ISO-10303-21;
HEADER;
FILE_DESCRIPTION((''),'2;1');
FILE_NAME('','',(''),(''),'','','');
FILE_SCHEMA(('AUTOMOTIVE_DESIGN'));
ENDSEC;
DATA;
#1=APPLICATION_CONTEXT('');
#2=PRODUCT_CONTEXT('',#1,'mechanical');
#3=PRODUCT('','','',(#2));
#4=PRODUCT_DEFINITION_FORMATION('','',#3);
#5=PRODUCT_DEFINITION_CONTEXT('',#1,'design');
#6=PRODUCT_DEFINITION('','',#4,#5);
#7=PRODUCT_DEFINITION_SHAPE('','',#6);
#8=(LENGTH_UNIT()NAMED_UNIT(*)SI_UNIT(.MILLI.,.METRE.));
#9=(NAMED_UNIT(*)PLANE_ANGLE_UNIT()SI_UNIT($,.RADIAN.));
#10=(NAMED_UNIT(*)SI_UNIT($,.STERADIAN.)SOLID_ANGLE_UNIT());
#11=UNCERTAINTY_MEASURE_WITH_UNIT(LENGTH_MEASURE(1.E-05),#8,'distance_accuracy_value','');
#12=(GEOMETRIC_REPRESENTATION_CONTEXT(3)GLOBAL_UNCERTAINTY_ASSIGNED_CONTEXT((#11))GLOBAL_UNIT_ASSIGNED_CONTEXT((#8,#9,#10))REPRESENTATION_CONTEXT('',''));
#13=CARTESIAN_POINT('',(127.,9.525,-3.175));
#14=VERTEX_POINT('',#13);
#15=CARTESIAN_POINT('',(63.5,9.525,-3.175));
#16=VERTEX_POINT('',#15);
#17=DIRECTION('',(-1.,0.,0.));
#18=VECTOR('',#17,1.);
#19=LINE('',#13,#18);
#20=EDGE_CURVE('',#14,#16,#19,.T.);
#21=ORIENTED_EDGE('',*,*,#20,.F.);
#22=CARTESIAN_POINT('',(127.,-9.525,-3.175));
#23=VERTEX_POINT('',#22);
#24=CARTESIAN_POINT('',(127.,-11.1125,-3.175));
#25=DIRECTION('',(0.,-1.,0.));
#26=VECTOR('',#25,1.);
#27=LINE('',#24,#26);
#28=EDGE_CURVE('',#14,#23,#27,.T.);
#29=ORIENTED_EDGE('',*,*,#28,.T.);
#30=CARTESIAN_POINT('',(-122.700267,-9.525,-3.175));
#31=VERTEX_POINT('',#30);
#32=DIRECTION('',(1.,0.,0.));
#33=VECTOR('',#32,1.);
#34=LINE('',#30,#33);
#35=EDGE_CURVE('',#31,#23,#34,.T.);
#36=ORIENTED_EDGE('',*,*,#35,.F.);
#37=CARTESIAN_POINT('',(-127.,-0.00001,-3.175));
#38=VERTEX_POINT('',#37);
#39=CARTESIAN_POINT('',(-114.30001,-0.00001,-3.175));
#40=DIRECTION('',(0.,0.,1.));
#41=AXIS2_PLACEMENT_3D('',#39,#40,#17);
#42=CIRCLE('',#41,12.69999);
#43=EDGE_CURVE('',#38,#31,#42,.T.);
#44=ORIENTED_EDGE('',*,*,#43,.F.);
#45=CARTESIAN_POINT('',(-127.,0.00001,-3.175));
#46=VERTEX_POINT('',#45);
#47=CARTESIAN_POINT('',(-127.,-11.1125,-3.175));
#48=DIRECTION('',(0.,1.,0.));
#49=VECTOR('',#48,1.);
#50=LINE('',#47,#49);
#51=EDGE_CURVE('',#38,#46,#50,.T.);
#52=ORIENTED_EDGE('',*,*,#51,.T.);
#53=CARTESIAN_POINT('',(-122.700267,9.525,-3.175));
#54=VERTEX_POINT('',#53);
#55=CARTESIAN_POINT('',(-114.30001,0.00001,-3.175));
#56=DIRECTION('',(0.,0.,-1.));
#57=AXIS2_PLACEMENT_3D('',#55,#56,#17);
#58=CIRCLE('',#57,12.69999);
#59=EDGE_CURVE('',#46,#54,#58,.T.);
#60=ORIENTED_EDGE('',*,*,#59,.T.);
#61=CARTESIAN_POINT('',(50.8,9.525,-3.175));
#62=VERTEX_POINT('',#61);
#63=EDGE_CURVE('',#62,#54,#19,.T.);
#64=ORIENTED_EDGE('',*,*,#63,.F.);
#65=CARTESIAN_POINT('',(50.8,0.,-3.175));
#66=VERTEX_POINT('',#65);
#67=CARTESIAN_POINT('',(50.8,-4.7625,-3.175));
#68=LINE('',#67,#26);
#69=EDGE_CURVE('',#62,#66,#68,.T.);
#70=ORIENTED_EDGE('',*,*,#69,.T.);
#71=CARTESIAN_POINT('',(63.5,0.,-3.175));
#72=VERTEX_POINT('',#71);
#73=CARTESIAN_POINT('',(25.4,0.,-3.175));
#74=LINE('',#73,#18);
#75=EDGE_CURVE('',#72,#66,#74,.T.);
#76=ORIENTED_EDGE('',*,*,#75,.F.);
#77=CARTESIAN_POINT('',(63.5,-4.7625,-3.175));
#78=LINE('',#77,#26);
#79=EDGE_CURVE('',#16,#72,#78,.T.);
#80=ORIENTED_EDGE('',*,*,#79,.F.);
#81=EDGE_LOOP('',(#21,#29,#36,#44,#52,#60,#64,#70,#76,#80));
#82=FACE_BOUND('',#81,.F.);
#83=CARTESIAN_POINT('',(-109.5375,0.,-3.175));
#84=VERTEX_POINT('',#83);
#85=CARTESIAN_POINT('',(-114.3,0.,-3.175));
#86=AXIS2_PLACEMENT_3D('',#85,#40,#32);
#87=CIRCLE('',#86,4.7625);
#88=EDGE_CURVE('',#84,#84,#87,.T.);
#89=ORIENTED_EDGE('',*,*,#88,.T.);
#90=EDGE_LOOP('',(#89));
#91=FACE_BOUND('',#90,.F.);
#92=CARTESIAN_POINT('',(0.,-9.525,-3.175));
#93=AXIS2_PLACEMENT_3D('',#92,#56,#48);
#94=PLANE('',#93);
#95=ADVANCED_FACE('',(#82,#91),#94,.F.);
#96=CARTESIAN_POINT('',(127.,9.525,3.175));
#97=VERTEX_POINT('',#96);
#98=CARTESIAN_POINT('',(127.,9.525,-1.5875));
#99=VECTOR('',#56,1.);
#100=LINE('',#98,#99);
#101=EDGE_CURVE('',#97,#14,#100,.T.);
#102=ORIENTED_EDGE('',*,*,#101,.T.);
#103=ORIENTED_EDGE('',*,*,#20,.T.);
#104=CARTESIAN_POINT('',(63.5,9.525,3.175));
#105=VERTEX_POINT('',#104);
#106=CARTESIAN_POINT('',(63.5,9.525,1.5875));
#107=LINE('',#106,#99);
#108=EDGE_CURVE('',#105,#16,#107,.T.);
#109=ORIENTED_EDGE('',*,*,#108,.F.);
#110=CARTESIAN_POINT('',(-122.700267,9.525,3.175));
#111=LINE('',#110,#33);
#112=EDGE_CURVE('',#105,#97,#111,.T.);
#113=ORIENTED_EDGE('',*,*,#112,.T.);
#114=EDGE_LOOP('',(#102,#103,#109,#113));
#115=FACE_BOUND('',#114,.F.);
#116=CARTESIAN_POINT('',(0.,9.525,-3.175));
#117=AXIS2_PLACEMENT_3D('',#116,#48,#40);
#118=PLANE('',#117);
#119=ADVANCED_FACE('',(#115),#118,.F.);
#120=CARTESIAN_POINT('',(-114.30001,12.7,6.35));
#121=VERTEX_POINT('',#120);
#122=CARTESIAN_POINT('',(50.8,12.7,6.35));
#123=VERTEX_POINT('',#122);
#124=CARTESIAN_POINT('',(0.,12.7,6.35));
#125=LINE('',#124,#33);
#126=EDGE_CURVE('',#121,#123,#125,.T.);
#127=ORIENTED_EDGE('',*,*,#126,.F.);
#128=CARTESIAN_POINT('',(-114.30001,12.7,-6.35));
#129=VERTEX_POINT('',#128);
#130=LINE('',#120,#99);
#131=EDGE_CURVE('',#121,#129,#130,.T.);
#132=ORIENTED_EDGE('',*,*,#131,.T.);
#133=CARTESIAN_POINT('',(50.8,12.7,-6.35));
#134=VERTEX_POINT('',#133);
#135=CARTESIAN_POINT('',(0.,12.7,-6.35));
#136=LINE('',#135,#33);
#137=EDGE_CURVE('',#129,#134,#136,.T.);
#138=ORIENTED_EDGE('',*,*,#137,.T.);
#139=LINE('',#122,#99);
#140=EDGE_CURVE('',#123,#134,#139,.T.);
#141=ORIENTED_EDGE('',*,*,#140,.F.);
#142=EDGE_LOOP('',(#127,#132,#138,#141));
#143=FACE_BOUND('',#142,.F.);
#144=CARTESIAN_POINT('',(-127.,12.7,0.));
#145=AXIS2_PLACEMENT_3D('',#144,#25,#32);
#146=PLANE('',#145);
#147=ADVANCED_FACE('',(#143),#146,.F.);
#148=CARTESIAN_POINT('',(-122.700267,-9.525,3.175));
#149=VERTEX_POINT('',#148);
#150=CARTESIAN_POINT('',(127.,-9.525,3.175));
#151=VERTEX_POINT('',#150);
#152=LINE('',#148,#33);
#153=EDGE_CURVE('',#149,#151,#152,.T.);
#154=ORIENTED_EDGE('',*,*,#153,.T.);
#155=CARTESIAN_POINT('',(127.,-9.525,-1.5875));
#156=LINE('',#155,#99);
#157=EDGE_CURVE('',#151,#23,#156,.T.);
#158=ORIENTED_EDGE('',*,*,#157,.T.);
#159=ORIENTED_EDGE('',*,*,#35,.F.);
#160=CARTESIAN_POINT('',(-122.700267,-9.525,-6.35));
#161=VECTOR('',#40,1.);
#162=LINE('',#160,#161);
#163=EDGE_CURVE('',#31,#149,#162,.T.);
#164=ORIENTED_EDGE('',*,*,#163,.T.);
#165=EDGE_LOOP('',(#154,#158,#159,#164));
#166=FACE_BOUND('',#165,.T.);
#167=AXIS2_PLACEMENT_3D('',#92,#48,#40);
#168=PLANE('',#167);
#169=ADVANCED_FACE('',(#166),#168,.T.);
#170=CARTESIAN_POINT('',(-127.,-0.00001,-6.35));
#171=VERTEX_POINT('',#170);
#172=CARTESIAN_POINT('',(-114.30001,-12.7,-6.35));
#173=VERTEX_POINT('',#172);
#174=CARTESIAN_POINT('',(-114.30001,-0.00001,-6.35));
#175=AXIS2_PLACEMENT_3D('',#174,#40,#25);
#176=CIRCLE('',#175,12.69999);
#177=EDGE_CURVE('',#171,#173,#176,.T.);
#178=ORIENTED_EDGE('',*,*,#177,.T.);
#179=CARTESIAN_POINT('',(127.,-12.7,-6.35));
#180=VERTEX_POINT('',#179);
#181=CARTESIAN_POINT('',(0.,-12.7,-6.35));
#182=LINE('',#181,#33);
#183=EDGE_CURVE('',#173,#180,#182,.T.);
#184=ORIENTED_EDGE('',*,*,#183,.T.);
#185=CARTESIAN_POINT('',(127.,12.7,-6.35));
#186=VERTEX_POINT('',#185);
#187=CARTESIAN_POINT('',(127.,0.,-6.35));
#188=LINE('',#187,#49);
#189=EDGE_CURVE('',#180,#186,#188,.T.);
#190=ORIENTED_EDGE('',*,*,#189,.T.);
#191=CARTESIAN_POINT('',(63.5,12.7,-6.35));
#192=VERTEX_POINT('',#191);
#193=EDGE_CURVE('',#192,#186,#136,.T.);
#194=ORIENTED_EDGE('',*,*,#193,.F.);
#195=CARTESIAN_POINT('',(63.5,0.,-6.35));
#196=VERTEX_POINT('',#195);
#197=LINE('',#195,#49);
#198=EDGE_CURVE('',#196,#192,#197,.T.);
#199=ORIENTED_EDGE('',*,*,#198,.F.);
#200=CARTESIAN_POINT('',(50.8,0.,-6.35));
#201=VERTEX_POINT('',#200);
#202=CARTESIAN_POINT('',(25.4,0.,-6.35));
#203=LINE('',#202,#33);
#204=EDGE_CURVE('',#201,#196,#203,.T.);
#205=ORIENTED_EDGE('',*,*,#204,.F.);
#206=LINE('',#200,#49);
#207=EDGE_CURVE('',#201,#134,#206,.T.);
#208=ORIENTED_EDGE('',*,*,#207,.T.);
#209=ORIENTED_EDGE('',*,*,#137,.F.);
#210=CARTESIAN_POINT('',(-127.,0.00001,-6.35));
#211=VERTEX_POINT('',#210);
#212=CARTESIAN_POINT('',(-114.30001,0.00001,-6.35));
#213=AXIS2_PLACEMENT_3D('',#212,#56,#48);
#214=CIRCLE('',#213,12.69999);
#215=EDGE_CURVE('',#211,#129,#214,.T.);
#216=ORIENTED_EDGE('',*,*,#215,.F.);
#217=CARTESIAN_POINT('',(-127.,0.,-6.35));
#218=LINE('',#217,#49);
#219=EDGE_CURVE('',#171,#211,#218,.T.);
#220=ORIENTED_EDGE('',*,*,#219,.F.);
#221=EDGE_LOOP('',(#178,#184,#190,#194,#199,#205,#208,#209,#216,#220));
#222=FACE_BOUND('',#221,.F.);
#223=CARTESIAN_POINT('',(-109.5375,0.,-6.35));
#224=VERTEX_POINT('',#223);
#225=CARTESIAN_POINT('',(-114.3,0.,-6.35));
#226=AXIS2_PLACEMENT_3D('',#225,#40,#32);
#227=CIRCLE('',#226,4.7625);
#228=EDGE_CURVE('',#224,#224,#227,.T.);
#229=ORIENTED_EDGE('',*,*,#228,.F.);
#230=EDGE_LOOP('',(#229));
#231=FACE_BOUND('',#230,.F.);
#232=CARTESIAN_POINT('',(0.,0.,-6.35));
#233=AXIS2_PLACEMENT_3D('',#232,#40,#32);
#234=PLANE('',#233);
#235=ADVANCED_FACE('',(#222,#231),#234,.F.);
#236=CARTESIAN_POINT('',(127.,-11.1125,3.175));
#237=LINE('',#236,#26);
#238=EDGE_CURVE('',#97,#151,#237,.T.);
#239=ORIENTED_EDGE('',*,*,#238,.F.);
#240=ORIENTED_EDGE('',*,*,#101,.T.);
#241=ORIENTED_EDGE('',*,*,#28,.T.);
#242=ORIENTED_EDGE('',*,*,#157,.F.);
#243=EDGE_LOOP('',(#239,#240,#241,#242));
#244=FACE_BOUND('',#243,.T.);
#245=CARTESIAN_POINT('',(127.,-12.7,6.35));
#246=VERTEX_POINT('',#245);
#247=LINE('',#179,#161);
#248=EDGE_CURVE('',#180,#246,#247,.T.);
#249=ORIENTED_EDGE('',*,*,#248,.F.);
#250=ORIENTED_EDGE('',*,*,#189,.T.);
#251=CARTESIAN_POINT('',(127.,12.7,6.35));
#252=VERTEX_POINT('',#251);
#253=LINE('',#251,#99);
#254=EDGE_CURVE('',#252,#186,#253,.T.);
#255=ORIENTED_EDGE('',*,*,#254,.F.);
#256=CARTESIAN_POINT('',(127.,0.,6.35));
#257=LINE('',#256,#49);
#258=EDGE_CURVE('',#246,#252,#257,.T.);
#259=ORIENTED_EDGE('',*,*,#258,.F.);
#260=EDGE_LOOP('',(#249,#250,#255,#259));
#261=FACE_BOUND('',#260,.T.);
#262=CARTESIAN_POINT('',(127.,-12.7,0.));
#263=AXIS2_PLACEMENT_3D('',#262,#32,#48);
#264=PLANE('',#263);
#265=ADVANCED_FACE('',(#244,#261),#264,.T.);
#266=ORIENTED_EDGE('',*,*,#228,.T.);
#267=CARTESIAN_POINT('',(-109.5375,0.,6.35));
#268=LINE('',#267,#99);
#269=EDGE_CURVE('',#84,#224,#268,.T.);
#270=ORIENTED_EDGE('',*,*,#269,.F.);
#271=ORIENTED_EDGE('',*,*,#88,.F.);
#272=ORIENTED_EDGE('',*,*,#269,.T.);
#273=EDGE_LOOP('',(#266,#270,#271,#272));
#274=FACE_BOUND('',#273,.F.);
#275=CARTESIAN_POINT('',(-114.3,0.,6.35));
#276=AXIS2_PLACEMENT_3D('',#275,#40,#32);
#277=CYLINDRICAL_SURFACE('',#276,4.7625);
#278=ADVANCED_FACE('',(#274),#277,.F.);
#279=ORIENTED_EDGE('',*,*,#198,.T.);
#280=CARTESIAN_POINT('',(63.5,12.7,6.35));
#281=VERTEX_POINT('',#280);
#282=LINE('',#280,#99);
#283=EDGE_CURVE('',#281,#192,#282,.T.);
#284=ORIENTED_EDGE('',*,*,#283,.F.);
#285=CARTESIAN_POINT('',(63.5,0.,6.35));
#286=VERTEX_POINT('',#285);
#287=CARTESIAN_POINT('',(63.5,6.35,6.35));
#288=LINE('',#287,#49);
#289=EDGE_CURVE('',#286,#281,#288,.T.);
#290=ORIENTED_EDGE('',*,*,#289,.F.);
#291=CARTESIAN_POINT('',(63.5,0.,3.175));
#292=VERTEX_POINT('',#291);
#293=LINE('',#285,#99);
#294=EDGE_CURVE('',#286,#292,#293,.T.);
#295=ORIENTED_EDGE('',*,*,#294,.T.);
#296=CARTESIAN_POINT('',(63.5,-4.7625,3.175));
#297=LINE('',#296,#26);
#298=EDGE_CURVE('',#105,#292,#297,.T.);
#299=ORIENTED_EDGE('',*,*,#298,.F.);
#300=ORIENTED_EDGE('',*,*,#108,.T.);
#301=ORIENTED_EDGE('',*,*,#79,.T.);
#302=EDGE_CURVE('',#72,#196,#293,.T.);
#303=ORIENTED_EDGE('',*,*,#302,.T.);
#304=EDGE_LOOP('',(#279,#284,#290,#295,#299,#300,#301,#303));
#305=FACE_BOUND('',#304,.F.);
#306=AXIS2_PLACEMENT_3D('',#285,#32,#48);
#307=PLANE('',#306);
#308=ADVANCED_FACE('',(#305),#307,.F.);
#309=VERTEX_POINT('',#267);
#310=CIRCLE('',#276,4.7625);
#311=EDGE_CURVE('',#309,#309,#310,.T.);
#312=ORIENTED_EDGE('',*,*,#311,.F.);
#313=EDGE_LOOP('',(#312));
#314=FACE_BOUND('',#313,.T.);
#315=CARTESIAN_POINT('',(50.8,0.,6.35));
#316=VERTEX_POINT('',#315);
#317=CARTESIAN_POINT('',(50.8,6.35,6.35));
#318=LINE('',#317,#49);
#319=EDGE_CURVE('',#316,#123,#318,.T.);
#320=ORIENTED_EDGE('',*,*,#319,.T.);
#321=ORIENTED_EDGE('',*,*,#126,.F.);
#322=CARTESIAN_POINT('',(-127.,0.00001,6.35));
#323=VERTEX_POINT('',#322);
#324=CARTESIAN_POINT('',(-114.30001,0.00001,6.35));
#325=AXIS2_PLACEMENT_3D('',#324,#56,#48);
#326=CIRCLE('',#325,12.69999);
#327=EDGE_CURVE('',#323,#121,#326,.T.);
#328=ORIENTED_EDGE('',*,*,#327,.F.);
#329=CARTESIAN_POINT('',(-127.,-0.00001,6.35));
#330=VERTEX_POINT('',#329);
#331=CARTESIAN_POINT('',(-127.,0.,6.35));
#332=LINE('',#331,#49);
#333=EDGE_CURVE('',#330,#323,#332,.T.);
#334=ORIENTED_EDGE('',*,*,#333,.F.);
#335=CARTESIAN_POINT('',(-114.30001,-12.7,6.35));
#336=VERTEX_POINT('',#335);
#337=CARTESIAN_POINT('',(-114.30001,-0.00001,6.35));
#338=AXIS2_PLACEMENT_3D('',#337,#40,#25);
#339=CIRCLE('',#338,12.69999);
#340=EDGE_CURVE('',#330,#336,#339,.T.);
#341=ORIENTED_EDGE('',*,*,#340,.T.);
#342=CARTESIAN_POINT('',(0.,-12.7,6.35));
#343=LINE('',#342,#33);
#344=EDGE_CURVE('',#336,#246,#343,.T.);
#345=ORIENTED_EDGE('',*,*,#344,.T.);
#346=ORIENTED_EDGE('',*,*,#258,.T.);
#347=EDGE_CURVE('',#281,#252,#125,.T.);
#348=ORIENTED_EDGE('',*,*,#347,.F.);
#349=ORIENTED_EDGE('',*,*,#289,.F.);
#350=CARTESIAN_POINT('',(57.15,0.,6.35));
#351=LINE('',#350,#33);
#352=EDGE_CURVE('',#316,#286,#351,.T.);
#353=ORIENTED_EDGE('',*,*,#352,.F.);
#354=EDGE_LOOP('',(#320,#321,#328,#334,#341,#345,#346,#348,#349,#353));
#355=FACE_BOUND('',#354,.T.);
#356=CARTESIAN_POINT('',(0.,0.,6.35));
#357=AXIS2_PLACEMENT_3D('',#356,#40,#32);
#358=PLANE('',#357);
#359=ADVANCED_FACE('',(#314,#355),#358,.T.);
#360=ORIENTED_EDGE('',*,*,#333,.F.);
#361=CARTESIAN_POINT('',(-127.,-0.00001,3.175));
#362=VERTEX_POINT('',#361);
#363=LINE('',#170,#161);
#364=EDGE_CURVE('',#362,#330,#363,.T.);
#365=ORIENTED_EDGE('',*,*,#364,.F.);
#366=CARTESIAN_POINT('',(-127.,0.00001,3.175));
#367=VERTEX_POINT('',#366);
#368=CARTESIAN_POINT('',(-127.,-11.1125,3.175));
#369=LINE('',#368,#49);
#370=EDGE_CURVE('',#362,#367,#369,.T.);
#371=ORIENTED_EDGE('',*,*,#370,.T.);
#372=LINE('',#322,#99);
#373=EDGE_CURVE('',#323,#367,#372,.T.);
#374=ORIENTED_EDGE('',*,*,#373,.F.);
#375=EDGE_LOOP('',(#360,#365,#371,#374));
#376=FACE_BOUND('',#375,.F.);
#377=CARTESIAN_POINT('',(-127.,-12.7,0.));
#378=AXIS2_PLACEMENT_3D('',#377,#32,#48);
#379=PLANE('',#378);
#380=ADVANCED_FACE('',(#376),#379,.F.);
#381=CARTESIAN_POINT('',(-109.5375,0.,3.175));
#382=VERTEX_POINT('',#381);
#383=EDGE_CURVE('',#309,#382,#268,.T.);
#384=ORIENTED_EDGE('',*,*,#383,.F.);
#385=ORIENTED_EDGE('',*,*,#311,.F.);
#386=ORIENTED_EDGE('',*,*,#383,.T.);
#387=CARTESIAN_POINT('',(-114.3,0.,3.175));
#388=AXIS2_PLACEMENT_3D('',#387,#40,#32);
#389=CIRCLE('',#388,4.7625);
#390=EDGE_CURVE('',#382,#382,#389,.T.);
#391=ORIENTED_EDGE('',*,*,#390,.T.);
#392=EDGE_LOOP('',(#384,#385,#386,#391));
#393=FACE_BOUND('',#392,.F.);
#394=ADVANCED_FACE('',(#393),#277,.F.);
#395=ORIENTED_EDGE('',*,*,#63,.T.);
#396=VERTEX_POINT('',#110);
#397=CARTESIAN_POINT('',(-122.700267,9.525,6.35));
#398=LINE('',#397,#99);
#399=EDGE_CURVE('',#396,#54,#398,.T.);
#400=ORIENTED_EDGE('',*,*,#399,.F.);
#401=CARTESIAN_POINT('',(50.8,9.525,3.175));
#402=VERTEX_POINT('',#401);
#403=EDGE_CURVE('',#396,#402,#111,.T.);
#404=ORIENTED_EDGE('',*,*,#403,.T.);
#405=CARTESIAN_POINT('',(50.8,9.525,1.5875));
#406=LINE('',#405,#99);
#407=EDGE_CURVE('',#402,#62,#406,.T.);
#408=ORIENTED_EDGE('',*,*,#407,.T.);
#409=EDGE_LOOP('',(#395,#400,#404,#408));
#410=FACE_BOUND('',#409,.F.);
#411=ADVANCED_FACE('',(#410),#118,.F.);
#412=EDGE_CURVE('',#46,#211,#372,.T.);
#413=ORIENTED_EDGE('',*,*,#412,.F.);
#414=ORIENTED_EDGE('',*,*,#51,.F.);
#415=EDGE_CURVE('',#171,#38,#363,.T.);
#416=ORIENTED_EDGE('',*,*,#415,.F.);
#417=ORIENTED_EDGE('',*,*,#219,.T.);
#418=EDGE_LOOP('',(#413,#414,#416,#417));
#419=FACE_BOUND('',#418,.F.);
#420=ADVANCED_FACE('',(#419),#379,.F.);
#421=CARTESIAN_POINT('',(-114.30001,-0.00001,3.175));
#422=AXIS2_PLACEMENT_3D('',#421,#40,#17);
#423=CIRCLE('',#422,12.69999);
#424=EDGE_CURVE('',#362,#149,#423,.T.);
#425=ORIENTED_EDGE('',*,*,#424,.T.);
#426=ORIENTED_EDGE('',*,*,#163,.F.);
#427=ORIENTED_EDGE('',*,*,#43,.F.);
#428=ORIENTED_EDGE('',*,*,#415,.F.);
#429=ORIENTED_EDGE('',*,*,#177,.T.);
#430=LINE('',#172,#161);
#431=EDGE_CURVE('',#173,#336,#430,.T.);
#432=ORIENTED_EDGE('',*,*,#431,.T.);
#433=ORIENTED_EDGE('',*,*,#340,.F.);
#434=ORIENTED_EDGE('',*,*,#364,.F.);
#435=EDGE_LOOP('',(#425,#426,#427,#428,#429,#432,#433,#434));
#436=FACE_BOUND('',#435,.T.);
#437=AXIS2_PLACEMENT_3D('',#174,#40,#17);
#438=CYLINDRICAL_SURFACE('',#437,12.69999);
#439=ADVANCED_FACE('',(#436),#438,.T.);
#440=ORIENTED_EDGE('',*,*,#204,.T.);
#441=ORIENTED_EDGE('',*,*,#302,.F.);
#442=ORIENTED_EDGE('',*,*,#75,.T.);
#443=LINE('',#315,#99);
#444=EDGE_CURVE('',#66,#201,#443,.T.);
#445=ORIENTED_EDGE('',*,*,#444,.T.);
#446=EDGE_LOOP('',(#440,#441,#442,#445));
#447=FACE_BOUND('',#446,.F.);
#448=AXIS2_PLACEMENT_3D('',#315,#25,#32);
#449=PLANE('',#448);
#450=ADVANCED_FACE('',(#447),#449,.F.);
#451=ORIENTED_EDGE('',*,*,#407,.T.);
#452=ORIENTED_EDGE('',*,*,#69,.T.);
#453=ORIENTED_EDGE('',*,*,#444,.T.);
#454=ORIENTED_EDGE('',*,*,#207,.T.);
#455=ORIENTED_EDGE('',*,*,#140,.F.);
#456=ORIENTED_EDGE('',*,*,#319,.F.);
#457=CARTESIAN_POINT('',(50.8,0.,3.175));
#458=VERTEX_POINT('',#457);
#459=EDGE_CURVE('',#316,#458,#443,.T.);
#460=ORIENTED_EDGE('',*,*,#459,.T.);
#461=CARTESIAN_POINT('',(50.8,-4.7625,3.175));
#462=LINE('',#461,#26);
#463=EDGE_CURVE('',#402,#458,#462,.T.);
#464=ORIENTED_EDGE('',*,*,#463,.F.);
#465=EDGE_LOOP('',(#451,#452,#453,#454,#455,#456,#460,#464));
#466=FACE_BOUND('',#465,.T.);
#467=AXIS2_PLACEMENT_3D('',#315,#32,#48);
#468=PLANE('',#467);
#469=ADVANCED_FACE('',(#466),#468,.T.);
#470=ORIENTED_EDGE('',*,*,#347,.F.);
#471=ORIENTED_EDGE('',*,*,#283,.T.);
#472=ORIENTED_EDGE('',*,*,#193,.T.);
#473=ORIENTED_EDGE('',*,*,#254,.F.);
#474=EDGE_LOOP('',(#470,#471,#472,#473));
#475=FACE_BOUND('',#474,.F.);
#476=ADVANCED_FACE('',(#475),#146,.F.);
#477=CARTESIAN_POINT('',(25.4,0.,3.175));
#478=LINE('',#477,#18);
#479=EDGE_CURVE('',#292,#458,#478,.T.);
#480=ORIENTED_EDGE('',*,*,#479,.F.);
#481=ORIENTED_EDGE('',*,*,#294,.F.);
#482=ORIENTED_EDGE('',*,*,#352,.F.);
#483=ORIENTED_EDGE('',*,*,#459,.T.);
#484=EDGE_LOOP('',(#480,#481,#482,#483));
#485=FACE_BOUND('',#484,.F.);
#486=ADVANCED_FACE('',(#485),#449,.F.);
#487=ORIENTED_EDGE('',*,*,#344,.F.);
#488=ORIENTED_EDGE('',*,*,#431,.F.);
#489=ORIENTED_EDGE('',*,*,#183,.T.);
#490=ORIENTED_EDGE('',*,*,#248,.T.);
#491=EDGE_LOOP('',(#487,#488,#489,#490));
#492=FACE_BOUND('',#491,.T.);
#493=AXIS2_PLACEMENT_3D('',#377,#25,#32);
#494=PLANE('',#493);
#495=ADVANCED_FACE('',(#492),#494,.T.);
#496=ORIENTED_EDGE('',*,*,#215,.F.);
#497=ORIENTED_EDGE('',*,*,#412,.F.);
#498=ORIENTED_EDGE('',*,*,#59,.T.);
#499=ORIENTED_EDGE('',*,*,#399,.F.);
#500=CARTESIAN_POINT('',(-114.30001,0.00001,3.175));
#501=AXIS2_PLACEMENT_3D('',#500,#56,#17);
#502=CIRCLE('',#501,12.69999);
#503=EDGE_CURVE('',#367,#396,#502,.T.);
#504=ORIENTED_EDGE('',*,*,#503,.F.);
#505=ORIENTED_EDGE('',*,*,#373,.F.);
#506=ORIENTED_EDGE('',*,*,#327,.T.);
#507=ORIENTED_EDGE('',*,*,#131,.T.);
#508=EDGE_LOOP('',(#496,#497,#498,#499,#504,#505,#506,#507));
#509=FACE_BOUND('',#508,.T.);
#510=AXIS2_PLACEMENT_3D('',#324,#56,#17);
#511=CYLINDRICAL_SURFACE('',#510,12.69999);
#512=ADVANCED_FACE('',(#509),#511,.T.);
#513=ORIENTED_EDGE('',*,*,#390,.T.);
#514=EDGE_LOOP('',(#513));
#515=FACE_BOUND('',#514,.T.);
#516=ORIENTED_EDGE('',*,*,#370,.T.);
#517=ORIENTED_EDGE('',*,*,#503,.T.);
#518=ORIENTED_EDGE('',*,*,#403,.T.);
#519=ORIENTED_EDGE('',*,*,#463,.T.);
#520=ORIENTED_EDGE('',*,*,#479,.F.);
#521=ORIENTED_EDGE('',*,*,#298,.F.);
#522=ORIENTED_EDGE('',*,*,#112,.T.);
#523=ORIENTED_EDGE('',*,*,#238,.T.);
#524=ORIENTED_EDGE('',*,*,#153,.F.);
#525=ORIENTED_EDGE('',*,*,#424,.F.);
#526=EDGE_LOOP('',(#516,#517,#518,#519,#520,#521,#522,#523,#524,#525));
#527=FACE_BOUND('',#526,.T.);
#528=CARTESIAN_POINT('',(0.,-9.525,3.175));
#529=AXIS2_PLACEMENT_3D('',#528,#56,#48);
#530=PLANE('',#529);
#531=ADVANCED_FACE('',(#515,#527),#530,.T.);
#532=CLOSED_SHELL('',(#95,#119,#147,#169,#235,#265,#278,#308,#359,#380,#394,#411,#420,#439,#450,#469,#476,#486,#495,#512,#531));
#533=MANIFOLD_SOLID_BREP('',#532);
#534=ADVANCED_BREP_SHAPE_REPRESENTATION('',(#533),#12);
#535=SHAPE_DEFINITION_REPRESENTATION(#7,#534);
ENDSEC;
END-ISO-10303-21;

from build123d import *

# Parameters (mm, degrees)
F0_W          = 254
F0_H          = 25.4
F1_DEPTH      = 6.35
F2_R          = 12.69999
F3_R          = 4.7625
F4_DEPTH      = 12.701
F5_W          = 19.05
F5_H          = 6.35
F6_DEPTH      = 127.001
F6_DEPTH_BACK = 127.001
F7_W          = 12.7
F7_H          = 12.7
F8_DEPTH      = 12.701


# Not quite as in the source:
# - a fillet or chamfer is up to 0.001 mm smaller than in the source, because OpenCascade refuses the exact size


with BuildPart() as f1:
    # F0 (on Top) → F1 (new body, symmetric)
    with BuildSketch(Plane.XY):
        Rectangle(F0_W, F0_H)
    extrude(amount=F1_DEPTH, both=True)

    # F2 (radius 12.7 in the source; OpenCascade refuses exactly that, so slightly less here)
    f2_edges = [f1.edges().sort_by_distance(p)[0] for p in [
        (-127, 12.7, 0),
        (-127, -12.7, 0),
    ]]
    fillet(f2_edges, radius=F2_R)

    # F3 (on face) → F4 (cut, through all)
    with BuildSketch(Plane.XY.offset(6.35)):
        with Locations((-114.3, 0)):
            Circle(F3_R)
    extrude(amount=-F4_DEPTH, mode=Mode.SUBTRACT)

    # F5 (on Right) → F6 (cut, two sides)
    with BuildSketch(Plane.YZ) as f6_sk:
        Rectangle(F5_W, F5_H)
    extrude(amount=-F6_DEPTH, mode=Mode.SUBTRACT)
    extrude(f6_sk.sketch, amount=F6_DEPTH_BACK, mode=Mode.SUBTRACT)

    # F7 (on face) → F8 (cut, through all)
    with BuildSketch(Plane.XY.offset(6.35)):
        with Locations((57.15, 6.35)):
            Rectangle(F7_W, F7_H)
    extrude(amount=-F8_DEPTH, mode=Mode.SUBTRACT)


solid = f1.part
